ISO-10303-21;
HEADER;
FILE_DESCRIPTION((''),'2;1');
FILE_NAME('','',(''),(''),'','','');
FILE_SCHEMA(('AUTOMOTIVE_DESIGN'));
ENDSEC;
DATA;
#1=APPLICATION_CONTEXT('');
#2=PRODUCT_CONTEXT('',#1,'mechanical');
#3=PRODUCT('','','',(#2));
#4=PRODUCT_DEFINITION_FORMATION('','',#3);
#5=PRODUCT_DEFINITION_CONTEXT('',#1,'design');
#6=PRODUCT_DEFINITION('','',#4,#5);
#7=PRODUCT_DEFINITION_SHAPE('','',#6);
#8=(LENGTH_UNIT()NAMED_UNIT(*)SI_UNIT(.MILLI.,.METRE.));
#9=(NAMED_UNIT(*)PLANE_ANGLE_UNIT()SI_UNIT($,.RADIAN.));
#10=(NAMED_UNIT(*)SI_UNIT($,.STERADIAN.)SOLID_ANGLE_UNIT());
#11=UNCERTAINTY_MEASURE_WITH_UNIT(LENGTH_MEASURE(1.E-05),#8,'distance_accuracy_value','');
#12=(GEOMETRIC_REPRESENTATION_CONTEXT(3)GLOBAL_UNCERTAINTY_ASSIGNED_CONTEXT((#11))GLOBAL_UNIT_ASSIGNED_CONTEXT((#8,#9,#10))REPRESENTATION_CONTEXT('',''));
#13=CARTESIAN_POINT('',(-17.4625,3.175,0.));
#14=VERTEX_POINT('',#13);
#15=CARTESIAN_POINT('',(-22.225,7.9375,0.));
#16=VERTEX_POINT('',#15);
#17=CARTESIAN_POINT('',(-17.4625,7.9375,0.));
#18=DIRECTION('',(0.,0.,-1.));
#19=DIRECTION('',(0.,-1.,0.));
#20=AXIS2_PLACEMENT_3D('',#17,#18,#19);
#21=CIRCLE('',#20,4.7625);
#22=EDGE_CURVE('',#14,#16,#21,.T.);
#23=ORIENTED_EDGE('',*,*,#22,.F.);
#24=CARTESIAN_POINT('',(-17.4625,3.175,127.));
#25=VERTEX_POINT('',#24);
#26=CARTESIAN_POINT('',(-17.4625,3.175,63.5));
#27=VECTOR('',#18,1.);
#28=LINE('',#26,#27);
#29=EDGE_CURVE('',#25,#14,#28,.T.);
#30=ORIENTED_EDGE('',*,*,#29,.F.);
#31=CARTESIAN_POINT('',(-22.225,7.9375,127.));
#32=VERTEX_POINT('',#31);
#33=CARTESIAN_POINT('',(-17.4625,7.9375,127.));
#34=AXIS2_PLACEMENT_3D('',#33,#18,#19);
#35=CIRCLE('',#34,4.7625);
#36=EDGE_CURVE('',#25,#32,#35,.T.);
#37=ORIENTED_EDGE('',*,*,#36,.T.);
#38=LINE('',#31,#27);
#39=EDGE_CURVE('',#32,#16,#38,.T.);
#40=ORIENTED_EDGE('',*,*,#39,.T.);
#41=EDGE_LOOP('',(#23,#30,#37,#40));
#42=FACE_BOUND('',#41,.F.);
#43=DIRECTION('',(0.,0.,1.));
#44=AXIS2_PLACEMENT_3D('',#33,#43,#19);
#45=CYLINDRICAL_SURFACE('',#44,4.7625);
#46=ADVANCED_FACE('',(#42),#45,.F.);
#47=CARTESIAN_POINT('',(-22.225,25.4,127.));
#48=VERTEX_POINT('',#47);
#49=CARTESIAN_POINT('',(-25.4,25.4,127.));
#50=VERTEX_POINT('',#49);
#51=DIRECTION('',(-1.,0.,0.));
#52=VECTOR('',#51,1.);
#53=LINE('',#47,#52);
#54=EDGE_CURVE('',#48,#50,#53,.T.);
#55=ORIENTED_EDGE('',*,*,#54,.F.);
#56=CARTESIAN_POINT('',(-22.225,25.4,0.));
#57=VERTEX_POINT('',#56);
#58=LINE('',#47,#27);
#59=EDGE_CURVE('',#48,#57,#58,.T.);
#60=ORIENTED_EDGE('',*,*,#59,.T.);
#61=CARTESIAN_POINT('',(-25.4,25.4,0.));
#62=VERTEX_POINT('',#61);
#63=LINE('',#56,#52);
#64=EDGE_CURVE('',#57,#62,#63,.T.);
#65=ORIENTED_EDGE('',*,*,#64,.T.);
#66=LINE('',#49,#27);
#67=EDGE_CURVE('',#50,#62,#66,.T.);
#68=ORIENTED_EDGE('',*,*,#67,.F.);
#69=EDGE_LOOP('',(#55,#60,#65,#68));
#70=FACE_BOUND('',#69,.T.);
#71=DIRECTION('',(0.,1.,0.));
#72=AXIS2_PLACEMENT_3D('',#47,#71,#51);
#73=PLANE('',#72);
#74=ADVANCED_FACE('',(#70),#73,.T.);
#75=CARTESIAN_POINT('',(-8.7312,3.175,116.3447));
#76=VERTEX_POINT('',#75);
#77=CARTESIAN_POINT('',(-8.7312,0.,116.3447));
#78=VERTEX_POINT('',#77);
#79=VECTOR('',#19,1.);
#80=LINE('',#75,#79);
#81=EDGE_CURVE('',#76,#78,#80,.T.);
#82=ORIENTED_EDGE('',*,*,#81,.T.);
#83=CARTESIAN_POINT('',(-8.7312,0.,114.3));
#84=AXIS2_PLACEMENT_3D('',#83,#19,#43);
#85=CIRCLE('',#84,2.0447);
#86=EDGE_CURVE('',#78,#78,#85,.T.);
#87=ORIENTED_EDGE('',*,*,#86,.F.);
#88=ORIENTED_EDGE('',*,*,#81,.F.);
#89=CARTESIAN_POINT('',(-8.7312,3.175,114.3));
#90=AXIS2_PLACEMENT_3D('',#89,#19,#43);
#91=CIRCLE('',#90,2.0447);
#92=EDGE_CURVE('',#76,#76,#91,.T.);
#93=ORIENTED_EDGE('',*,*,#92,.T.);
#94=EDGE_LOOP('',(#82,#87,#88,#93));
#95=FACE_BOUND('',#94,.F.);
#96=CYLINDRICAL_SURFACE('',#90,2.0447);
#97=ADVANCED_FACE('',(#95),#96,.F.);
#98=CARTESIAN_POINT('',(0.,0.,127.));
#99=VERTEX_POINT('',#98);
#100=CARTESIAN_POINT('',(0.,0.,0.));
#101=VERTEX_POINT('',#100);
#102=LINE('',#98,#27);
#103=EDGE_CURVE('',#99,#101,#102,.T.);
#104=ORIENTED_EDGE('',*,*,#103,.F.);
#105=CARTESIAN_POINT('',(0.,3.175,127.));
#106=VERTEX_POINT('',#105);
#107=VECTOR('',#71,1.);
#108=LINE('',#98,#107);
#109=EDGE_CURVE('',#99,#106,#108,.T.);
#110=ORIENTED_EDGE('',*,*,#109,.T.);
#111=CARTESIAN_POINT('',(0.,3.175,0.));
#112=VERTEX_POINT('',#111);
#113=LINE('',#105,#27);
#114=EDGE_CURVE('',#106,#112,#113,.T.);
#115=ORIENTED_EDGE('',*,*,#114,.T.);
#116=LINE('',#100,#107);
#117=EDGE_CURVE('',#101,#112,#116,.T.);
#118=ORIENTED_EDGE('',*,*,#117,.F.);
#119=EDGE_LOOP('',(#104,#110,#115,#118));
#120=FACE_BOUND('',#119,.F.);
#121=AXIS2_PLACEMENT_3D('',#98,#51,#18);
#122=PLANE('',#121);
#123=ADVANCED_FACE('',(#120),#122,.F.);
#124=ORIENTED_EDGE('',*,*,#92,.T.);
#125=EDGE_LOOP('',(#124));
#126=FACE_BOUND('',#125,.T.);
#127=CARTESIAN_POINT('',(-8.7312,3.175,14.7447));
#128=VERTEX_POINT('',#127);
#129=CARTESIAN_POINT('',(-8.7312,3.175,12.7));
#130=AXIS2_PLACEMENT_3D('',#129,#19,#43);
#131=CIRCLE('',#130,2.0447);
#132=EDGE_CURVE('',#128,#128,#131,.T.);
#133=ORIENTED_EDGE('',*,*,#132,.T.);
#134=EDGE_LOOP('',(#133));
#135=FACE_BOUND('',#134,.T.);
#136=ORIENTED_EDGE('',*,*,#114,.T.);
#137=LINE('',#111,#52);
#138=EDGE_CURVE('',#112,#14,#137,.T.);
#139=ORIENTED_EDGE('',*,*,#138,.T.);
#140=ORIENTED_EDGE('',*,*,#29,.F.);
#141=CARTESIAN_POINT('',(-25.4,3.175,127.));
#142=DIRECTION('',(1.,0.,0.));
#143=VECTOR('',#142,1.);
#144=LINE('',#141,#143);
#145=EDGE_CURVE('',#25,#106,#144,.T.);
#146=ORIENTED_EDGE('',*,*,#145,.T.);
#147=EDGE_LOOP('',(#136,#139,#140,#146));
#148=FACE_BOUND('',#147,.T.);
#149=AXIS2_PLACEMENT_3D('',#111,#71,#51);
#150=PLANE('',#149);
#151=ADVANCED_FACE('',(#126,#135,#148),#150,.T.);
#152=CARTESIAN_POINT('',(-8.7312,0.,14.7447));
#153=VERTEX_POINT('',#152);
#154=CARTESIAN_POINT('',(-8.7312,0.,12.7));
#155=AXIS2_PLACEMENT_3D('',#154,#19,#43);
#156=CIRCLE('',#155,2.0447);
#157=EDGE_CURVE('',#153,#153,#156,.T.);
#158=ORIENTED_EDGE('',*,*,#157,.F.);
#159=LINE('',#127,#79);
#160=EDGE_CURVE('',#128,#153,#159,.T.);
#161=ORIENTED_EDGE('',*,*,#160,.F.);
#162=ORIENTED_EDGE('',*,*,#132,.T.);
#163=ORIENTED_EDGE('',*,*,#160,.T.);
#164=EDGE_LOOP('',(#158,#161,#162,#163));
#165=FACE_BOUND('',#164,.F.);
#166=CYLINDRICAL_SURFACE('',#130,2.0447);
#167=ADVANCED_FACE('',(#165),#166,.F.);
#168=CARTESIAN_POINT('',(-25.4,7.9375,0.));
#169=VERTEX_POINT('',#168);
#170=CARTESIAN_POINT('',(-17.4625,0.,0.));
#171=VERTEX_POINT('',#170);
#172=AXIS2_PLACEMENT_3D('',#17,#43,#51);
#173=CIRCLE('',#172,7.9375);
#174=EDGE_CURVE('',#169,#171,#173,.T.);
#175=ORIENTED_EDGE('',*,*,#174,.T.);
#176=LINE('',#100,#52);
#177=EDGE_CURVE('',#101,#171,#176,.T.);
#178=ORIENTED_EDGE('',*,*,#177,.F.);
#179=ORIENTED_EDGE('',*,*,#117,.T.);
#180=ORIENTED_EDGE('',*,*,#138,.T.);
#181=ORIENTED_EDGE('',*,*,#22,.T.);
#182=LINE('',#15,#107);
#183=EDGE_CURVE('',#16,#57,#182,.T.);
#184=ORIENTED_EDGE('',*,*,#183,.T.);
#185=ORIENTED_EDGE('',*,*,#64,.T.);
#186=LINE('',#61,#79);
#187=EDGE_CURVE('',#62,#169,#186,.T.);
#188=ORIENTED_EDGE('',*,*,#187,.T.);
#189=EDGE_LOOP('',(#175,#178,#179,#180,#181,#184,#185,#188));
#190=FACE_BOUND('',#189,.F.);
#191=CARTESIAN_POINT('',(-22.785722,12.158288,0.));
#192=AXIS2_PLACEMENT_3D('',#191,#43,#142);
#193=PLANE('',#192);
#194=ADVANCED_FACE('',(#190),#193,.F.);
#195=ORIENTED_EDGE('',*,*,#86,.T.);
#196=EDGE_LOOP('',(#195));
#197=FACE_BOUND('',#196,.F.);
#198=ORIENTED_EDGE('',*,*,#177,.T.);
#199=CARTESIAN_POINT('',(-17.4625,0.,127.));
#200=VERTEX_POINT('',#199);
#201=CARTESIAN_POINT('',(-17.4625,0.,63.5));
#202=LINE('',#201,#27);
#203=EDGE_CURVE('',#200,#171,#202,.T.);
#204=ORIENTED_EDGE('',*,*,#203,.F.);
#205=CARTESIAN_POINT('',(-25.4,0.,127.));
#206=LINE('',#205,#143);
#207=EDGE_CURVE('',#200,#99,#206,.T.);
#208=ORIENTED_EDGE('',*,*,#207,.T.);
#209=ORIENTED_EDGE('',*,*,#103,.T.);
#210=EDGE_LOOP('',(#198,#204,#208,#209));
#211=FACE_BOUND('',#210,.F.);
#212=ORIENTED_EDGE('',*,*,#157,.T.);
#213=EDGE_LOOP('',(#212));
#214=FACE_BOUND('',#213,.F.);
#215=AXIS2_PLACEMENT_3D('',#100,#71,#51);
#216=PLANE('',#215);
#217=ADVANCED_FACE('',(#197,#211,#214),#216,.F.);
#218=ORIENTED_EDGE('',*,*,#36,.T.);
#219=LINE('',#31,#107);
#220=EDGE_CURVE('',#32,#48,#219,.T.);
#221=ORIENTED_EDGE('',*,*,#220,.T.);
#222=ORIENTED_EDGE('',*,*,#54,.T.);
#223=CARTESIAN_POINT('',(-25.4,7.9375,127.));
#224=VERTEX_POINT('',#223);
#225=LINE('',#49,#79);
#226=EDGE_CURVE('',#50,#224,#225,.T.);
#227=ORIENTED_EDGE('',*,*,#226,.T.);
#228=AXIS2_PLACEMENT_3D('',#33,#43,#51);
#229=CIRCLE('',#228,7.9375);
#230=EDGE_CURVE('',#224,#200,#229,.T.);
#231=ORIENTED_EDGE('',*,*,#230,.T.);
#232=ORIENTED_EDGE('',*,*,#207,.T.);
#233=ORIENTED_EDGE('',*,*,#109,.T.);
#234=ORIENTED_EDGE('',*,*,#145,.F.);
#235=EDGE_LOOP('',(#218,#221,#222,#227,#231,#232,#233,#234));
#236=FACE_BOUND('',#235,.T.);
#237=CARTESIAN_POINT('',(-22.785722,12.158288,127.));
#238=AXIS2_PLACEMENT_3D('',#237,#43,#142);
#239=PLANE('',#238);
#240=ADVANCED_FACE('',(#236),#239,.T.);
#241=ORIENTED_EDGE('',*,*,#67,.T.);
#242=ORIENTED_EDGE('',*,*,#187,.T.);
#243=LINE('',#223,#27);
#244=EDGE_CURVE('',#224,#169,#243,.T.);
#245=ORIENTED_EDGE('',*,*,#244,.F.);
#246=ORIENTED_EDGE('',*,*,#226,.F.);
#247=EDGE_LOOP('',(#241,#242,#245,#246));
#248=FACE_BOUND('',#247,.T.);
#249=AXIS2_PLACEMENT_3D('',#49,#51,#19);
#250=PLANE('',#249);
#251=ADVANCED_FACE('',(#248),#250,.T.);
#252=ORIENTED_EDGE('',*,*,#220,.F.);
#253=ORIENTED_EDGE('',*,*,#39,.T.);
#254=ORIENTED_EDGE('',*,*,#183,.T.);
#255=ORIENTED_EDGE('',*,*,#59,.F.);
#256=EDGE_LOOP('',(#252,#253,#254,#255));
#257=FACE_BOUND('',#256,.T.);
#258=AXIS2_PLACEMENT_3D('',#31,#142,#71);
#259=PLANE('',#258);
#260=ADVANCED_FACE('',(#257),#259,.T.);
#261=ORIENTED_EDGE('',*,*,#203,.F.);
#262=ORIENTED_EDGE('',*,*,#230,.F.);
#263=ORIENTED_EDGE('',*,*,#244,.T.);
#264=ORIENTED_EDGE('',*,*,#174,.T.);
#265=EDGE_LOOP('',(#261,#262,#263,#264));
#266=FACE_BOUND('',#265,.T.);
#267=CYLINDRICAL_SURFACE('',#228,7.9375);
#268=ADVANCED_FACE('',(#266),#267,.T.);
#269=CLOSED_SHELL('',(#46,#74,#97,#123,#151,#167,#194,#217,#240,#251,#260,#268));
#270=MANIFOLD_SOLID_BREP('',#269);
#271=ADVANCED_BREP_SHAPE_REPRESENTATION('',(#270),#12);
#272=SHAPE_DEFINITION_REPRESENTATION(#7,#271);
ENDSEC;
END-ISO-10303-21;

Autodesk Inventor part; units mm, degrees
ref_plane "YZ Plane" through (0, 0, 0) normal (1, 0, 0) x (0, 1, 0)
ref_plane "XZ Plane" through (0, 0, 0) normal (0, 1, 0) x (-1, 0, 0)
ref_plane "XY Plane" through (0, 0, 0) normal (0, 0, 1) x (1, 0, 0)
sketch "Sketch1" plane through (0, 0, 0) normal (0, 1, 0) x (-1, 0, 0)
  line L0 (0, 0) -> (25.4, 0)
  line L1 (25.4, 0) -> (25.4, 127)
  line L2 (25.4, 127) -> (0, 127)
  line L3 (0, 127) -> (0, 0)
  dimension "d0" = 25.4
  dimension "d1" = 127
extrude "Plate1" add sketch "Sketch1" along normal blind 3.175
sketch "Sketch2" plane through (-22.225, 0, 127) normal (-1, 0, 0) x (0, -1, 0)
  line L0 (0, -127) -> (0, 0)
  line L1 (0, 0) -> (-25.4, 0)
  line L2 (-25.4, 0) -> (-25.4, -127)
  line L3 (-25.4, -127) -> (0, -127)
edge flange "Flange1" height 25.4 angle 90 thickness 3.175 bend radius 4.7625 thickness toward (-1, 0, 0) relief tear relief width 3.175 relief depth 1.5875 edges at (-25.4, 3.175, 63.5) wall of the first edge with corners at (-22.225, 0, 0) (-22.225, 0, 127) (-22.225, 25.4, 127) (-22.225, 25.4, 0)
bend "Bend1"
corner "Corner1"
sketch "Sketch3" plane through (0, 3.175, 0) normal (0, 1, 0) x (1, 0, 0)
  line L0 (-17.4625, 0) -> (0, 0) construction
  line L1 (-8.7313, 0) -> (-8.7312, -127) construction
  line L2 (0, -127) -> (-17.4625, -127) construction
  point P0 (-8.7312, -12.7)
  point P1 (-8.7312, -114.3)
  dimension "d13" = 12.7
  dimension "d14" = 12.7
hole "Hole1" at (-8.7312, 3.175, 12.7) at (-8.7312, 3.175, 114.3) direction (0, -1, 0) diameter 4.0894 end through all clearance for "Pop Rivet" size "5/32" standard "4859 Fastners"
equation "\"d20\" = Thickness"
equation "\"d2\" = Thickness"
equation "\"d3\" = BendReliefWidth"
equation "\"d4\" = BendReliefDepth"
equation "\"d5\" = MinimumRemnant"
equation "\"d6\" = TransitionRadius"
equation "\"d9\" = BendRadius"
equation "\"d10\" = CornerReliefSize"
equation "\"d11\" = GapSize"
equation "\"d12\" = JacobiRadiusSize"
equation "\"BendRadius\" = 1.5 * Thickness"
equation "\"BendReliefWidth\" = Thickness"
equation "\"BendReliefDepth\" = 0.5 * Thickness"
equation "\"CornerReliefSize\" = 4 * Thickness"
equation "\"MinimumRemnant\" = 2 * Thickness"
equation "\"TransitionRadius\" = BendRadius"
equation "\"JacobiRadiusSize\" = BendRadius"
equation "\"GapSize\" = Thickness"
equation "\"Thickness\" = 3.175"
properties part number "200512" material "Aluminum 5052 H32"
